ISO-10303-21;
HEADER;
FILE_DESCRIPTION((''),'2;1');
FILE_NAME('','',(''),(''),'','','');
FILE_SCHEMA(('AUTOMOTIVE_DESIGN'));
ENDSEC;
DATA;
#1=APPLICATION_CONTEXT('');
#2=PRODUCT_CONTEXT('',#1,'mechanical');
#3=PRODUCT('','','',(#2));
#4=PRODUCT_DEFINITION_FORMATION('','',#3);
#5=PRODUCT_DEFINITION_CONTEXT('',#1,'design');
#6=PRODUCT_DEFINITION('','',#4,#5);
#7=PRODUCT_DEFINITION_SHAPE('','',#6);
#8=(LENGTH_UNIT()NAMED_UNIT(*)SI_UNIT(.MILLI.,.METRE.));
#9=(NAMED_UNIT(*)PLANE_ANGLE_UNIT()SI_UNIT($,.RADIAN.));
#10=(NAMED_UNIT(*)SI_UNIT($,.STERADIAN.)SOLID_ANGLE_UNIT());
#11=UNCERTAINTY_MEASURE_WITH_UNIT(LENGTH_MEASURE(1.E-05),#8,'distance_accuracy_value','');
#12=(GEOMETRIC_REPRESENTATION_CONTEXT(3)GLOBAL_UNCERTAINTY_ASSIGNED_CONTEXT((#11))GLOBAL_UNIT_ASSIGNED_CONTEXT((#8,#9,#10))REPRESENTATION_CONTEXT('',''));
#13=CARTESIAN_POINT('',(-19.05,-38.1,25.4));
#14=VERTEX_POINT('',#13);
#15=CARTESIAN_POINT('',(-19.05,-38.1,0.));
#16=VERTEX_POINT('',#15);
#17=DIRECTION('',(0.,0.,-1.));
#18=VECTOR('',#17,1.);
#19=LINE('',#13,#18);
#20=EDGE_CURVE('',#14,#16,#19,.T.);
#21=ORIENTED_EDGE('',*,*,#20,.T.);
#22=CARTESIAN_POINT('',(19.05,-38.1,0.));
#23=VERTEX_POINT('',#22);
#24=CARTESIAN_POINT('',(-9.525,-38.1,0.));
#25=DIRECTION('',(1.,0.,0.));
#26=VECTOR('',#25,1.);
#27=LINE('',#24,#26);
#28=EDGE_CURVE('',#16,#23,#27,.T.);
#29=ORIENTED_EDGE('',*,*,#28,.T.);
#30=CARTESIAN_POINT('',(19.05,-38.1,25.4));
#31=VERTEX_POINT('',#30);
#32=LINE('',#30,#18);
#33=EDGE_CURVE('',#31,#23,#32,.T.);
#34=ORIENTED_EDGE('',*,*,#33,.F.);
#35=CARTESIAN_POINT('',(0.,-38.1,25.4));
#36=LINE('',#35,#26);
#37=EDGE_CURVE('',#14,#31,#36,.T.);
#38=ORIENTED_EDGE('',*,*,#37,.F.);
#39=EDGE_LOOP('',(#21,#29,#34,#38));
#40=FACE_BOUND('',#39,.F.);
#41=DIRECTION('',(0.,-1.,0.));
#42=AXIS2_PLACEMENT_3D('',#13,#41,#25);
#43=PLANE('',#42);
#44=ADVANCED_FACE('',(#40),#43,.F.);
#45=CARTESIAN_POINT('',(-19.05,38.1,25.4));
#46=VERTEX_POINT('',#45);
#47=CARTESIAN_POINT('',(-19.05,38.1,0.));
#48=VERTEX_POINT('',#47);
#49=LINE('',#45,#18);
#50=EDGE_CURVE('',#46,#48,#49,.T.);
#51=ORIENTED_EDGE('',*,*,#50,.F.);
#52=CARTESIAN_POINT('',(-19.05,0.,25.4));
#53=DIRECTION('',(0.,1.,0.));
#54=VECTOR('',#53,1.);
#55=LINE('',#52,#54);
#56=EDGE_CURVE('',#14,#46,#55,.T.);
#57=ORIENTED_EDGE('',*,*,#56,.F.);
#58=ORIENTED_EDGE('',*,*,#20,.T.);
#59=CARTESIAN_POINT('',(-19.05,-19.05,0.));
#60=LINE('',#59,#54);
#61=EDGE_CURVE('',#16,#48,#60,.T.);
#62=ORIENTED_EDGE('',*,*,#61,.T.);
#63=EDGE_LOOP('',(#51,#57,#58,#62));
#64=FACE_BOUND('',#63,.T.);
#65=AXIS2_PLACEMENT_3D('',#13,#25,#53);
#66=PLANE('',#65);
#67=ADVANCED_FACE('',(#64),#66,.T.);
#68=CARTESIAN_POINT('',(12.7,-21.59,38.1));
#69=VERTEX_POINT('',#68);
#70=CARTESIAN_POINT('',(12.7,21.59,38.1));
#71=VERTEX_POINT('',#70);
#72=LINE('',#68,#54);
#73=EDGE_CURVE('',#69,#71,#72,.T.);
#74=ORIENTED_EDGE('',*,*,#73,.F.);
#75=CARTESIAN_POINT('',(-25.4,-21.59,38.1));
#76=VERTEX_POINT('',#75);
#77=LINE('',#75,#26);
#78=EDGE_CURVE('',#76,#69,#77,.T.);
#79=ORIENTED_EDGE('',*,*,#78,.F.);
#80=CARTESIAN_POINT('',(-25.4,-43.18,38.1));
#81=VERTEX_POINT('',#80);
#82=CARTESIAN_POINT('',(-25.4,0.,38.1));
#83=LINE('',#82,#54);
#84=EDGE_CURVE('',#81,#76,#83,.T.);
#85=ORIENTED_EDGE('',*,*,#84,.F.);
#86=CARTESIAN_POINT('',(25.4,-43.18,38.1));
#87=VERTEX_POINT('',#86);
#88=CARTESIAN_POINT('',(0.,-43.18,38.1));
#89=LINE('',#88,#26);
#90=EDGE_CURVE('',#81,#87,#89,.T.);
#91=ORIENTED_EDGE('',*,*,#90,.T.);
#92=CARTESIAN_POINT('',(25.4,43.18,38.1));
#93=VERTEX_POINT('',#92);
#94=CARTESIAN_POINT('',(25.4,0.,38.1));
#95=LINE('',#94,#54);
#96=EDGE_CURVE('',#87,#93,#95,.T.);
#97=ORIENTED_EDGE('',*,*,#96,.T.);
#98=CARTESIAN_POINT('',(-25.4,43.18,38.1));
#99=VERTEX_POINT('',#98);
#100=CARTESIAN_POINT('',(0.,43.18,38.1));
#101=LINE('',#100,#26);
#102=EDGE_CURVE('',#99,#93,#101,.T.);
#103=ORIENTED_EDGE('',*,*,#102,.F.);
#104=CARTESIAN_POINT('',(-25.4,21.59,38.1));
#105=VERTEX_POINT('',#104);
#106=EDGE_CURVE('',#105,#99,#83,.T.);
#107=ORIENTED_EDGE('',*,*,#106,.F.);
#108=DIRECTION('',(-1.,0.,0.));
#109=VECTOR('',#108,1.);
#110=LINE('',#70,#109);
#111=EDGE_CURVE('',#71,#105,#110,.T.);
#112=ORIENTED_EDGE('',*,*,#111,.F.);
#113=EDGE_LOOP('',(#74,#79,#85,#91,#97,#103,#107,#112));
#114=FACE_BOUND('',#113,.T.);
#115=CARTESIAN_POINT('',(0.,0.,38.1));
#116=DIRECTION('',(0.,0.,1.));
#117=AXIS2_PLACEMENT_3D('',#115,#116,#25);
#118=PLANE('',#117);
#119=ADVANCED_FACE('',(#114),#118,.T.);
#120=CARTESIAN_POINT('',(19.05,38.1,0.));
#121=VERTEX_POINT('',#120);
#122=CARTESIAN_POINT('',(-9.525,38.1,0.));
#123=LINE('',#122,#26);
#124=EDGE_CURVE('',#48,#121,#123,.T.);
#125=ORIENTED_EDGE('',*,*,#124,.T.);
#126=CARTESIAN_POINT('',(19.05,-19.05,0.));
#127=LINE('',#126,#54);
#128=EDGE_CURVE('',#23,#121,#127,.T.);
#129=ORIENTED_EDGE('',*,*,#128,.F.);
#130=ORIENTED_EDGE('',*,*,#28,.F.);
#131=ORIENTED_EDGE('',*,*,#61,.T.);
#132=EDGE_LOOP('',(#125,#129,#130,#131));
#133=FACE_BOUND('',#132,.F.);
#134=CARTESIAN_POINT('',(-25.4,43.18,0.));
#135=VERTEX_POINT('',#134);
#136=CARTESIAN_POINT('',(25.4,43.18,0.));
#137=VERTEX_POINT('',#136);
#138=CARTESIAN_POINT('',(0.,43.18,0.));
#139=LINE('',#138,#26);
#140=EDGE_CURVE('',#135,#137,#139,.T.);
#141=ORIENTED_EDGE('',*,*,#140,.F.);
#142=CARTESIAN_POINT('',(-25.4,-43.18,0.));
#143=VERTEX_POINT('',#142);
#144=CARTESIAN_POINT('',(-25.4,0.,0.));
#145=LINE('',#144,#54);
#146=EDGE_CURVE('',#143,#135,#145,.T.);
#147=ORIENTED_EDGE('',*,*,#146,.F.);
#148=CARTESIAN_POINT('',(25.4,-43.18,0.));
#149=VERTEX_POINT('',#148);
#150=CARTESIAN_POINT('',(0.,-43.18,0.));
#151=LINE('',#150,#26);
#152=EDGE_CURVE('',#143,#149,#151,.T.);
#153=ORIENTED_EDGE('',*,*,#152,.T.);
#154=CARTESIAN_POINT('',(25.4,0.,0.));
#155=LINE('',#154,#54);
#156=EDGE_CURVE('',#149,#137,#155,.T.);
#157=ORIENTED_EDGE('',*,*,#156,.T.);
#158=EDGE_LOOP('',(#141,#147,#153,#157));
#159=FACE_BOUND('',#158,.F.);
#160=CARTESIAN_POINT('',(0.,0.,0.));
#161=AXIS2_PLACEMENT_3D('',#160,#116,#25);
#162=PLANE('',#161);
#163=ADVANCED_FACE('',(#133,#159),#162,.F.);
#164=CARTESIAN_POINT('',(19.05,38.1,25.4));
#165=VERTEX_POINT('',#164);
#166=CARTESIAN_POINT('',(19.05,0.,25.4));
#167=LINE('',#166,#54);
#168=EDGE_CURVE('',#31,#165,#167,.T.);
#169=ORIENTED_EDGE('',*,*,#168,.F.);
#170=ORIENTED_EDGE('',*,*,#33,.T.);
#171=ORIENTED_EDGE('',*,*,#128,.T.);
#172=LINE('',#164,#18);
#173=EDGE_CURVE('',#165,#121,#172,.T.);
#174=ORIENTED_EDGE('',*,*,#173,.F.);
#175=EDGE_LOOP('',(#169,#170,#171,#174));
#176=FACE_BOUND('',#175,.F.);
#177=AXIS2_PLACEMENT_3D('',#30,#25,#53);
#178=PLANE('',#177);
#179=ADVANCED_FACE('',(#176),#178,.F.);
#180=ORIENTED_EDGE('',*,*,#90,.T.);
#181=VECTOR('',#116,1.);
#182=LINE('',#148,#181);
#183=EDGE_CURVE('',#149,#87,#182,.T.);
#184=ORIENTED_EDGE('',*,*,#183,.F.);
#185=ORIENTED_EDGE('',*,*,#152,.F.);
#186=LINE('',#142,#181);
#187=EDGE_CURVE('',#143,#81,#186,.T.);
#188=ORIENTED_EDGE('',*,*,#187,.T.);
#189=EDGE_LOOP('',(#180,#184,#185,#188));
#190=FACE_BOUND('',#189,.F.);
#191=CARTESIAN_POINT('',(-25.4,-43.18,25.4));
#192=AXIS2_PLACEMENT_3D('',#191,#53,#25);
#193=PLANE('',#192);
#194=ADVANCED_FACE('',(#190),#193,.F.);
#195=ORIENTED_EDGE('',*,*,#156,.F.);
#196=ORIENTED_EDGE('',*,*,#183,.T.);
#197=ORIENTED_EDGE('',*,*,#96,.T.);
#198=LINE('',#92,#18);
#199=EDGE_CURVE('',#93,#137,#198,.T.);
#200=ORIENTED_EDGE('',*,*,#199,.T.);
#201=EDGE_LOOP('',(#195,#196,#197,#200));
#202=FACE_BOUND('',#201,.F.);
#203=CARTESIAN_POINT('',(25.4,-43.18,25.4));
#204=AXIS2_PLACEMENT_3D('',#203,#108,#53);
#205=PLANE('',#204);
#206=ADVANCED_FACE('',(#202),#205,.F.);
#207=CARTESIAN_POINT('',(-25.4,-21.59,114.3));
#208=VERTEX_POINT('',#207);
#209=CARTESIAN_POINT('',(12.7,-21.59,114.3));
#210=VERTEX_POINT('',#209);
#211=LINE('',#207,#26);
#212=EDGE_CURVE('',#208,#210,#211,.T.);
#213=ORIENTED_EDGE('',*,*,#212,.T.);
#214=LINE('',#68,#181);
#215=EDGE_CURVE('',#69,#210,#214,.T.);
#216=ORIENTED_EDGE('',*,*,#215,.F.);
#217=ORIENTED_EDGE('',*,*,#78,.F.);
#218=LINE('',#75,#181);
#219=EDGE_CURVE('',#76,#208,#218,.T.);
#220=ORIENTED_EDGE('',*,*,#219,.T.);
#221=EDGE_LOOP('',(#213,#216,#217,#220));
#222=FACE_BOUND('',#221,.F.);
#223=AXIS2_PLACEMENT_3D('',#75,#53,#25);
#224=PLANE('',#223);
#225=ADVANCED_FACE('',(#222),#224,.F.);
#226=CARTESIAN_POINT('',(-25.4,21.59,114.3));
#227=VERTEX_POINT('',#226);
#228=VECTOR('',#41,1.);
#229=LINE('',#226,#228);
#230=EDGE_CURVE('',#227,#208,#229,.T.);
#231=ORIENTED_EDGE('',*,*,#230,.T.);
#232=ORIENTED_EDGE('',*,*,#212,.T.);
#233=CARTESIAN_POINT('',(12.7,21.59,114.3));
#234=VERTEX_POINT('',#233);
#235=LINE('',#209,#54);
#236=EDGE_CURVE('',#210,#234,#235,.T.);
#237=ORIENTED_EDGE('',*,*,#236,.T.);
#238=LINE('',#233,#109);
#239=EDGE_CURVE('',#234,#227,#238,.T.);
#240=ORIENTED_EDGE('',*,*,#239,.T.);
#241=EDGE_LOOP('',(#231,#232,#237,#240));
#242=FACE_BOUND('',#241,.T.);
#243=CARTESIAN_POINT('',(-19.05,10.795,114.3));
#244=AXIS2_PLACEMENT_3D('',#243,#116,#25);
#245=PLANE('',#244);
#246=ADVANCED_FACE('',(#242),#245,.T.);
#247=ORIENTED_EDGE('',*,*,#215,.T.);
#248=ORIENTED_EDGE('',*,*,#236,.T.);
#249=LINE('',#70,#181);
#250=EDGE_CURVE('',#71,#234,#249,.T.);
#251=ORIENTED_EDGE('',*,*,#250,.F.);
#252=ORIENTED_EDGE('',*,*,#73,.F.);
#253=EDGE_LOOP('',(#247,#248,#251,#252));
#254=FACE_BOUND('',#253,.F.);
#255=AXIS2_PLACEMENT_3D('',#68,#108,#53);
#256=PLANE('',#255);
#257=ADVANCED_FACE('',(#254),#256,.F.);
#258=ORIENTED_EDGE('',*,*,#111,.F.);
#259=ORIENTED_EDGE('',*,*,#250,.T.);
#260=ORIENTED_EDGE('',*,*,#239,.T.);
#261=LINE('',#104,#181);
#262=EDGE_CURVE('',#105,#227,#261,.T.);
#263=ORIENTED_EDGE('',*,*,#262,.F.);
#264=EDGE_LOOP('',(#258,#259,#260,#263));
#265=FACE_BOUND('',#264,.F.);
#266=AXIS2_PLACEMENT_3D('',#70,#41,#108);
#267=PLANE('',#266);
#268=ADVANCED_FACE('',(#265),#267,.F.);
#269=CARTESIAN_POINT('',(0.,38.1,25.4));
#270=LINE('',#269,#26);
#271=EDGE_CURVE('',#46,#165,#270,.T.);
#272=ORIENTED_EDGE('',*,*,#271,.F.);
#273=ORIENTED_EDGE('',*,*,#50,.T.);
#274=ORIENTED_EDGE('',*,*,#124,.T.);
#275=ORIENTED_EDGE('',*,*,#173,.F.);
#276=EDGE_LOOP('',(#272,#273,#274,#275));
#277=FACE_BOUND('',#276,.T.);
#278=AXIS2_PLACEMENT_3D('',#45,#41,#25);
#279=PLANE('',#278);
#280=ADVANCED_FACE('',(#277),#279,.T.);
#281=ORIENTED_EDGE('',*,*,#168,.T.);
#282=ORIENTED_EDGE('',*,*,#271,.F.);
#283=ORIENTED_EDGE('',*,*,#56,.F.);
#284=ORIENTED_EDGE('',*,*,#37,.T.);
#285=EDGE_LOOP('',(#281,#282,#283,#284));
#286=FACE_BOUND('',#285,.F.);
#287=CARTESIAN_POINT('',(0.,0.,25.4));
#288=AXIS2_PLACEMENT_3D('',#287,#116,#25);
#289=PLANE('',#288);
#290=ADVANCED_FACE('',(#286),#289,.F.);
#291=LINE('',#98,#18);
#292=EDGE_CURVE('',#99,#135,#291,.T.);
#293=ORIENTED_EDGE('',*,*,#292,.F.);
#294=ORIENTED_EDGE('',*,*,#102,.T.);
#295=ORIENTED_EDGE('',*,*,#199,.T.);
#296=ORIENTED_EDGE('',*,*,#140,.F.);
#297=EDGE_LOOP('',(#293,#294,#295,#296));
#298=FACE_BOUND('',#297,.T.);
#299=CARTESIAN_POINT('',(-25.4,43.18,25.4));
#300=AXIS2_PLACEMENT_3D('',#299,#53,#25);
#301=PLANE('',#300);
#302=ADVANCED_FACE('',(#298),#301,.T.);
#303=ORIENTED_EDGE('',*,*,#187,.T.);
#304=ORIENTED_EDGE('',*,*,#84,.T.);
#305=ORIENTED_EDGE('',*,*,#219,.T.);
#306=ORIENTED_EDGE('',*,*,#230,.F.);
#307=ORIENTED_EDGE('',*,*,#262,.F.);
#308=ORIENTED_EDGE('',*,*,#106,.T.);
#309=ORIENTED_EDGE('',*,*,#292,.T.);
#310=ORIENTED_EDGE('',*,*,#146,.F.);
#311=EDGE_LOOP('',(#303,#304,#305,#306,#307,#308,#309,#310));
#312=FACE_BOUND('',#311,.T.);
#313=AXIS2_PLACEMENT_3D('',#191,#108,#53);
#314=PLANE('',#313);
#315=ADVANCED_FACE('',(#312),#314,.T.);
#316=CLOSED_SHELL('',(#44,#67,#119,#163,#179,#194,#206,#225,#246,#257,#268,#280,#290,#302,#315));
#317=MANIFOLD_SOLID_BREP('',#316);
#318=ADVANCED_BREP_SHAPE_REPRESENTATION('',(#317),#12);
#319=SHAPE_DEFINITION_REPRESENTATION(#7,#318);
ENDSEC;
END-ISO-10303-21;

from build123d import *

# Parameters (mm, degrees)
F0_W     = 50.8
F0_H     = 86.36
F1_DEPTH = 25.4
F2_W     = 38.1
F2_H     = 76.2
F3_DEPTH = 101.6
F4_W     = 50.8
F4_H     = 86.36
F4_W_2   = 38.1
F4_H_2   = 76.2
F5_DEPTH = 12.7
F6_W     = 12.7
F6_H     = 21.59
F7_DEPTH = 76.2


with BuildPart() as f1:
    # F0 (on Top) → F1 (new body)
    with BuildSketch(Plane.XY):
        Rectangle(F0_W, F0_H)
    extrude(amount=F1_DEPTH)

    # F2 (on face) → F3 (cut)
    with BuildSketch(Plane.XY.offset(25.4)):
        Rectangle(F2_W, F2_H)
    extrude(amount=-F3_DEPTH, mode=Mode.SUBTRACT)

    # F4 (on face) → F5 (join)
    with BuildSketch(Plane.XY.offset(25.4)):
        Rectangle(F4_W, F4_H)
        Rectangle(F4_W_2, F4_H_2, mode=Mode.SUBTRACT)
        Rectangle(F4_W_2, F4_H_2)
    extrude(amount=F5_DEPTH)

    # F6 (on face) → F7 (join)
    with BuildSketch(Plane.XY.offset(38.1)):
        with Locations((-19.05, 10.795)):
            Rectangle(F6_W, F6_H)
        with Locations((-6.35, 10.795)):
            Rectangle(F6_W, F6_H)
        with Locations((-19.05, -10.795)):
            Rectangle(F6_W, F6_H)
        Polygon((12.7, 21.59), (0, 21.59), (0, 0), (0, -21.59), (12.7, -21.59), (12.7, 0), align=None)
        with Locations((-6.35, -10.795)):
            Rectangle(F6_W, F6_H)
    extrude(amount=F7_DEPTH)


solid = f1.part
